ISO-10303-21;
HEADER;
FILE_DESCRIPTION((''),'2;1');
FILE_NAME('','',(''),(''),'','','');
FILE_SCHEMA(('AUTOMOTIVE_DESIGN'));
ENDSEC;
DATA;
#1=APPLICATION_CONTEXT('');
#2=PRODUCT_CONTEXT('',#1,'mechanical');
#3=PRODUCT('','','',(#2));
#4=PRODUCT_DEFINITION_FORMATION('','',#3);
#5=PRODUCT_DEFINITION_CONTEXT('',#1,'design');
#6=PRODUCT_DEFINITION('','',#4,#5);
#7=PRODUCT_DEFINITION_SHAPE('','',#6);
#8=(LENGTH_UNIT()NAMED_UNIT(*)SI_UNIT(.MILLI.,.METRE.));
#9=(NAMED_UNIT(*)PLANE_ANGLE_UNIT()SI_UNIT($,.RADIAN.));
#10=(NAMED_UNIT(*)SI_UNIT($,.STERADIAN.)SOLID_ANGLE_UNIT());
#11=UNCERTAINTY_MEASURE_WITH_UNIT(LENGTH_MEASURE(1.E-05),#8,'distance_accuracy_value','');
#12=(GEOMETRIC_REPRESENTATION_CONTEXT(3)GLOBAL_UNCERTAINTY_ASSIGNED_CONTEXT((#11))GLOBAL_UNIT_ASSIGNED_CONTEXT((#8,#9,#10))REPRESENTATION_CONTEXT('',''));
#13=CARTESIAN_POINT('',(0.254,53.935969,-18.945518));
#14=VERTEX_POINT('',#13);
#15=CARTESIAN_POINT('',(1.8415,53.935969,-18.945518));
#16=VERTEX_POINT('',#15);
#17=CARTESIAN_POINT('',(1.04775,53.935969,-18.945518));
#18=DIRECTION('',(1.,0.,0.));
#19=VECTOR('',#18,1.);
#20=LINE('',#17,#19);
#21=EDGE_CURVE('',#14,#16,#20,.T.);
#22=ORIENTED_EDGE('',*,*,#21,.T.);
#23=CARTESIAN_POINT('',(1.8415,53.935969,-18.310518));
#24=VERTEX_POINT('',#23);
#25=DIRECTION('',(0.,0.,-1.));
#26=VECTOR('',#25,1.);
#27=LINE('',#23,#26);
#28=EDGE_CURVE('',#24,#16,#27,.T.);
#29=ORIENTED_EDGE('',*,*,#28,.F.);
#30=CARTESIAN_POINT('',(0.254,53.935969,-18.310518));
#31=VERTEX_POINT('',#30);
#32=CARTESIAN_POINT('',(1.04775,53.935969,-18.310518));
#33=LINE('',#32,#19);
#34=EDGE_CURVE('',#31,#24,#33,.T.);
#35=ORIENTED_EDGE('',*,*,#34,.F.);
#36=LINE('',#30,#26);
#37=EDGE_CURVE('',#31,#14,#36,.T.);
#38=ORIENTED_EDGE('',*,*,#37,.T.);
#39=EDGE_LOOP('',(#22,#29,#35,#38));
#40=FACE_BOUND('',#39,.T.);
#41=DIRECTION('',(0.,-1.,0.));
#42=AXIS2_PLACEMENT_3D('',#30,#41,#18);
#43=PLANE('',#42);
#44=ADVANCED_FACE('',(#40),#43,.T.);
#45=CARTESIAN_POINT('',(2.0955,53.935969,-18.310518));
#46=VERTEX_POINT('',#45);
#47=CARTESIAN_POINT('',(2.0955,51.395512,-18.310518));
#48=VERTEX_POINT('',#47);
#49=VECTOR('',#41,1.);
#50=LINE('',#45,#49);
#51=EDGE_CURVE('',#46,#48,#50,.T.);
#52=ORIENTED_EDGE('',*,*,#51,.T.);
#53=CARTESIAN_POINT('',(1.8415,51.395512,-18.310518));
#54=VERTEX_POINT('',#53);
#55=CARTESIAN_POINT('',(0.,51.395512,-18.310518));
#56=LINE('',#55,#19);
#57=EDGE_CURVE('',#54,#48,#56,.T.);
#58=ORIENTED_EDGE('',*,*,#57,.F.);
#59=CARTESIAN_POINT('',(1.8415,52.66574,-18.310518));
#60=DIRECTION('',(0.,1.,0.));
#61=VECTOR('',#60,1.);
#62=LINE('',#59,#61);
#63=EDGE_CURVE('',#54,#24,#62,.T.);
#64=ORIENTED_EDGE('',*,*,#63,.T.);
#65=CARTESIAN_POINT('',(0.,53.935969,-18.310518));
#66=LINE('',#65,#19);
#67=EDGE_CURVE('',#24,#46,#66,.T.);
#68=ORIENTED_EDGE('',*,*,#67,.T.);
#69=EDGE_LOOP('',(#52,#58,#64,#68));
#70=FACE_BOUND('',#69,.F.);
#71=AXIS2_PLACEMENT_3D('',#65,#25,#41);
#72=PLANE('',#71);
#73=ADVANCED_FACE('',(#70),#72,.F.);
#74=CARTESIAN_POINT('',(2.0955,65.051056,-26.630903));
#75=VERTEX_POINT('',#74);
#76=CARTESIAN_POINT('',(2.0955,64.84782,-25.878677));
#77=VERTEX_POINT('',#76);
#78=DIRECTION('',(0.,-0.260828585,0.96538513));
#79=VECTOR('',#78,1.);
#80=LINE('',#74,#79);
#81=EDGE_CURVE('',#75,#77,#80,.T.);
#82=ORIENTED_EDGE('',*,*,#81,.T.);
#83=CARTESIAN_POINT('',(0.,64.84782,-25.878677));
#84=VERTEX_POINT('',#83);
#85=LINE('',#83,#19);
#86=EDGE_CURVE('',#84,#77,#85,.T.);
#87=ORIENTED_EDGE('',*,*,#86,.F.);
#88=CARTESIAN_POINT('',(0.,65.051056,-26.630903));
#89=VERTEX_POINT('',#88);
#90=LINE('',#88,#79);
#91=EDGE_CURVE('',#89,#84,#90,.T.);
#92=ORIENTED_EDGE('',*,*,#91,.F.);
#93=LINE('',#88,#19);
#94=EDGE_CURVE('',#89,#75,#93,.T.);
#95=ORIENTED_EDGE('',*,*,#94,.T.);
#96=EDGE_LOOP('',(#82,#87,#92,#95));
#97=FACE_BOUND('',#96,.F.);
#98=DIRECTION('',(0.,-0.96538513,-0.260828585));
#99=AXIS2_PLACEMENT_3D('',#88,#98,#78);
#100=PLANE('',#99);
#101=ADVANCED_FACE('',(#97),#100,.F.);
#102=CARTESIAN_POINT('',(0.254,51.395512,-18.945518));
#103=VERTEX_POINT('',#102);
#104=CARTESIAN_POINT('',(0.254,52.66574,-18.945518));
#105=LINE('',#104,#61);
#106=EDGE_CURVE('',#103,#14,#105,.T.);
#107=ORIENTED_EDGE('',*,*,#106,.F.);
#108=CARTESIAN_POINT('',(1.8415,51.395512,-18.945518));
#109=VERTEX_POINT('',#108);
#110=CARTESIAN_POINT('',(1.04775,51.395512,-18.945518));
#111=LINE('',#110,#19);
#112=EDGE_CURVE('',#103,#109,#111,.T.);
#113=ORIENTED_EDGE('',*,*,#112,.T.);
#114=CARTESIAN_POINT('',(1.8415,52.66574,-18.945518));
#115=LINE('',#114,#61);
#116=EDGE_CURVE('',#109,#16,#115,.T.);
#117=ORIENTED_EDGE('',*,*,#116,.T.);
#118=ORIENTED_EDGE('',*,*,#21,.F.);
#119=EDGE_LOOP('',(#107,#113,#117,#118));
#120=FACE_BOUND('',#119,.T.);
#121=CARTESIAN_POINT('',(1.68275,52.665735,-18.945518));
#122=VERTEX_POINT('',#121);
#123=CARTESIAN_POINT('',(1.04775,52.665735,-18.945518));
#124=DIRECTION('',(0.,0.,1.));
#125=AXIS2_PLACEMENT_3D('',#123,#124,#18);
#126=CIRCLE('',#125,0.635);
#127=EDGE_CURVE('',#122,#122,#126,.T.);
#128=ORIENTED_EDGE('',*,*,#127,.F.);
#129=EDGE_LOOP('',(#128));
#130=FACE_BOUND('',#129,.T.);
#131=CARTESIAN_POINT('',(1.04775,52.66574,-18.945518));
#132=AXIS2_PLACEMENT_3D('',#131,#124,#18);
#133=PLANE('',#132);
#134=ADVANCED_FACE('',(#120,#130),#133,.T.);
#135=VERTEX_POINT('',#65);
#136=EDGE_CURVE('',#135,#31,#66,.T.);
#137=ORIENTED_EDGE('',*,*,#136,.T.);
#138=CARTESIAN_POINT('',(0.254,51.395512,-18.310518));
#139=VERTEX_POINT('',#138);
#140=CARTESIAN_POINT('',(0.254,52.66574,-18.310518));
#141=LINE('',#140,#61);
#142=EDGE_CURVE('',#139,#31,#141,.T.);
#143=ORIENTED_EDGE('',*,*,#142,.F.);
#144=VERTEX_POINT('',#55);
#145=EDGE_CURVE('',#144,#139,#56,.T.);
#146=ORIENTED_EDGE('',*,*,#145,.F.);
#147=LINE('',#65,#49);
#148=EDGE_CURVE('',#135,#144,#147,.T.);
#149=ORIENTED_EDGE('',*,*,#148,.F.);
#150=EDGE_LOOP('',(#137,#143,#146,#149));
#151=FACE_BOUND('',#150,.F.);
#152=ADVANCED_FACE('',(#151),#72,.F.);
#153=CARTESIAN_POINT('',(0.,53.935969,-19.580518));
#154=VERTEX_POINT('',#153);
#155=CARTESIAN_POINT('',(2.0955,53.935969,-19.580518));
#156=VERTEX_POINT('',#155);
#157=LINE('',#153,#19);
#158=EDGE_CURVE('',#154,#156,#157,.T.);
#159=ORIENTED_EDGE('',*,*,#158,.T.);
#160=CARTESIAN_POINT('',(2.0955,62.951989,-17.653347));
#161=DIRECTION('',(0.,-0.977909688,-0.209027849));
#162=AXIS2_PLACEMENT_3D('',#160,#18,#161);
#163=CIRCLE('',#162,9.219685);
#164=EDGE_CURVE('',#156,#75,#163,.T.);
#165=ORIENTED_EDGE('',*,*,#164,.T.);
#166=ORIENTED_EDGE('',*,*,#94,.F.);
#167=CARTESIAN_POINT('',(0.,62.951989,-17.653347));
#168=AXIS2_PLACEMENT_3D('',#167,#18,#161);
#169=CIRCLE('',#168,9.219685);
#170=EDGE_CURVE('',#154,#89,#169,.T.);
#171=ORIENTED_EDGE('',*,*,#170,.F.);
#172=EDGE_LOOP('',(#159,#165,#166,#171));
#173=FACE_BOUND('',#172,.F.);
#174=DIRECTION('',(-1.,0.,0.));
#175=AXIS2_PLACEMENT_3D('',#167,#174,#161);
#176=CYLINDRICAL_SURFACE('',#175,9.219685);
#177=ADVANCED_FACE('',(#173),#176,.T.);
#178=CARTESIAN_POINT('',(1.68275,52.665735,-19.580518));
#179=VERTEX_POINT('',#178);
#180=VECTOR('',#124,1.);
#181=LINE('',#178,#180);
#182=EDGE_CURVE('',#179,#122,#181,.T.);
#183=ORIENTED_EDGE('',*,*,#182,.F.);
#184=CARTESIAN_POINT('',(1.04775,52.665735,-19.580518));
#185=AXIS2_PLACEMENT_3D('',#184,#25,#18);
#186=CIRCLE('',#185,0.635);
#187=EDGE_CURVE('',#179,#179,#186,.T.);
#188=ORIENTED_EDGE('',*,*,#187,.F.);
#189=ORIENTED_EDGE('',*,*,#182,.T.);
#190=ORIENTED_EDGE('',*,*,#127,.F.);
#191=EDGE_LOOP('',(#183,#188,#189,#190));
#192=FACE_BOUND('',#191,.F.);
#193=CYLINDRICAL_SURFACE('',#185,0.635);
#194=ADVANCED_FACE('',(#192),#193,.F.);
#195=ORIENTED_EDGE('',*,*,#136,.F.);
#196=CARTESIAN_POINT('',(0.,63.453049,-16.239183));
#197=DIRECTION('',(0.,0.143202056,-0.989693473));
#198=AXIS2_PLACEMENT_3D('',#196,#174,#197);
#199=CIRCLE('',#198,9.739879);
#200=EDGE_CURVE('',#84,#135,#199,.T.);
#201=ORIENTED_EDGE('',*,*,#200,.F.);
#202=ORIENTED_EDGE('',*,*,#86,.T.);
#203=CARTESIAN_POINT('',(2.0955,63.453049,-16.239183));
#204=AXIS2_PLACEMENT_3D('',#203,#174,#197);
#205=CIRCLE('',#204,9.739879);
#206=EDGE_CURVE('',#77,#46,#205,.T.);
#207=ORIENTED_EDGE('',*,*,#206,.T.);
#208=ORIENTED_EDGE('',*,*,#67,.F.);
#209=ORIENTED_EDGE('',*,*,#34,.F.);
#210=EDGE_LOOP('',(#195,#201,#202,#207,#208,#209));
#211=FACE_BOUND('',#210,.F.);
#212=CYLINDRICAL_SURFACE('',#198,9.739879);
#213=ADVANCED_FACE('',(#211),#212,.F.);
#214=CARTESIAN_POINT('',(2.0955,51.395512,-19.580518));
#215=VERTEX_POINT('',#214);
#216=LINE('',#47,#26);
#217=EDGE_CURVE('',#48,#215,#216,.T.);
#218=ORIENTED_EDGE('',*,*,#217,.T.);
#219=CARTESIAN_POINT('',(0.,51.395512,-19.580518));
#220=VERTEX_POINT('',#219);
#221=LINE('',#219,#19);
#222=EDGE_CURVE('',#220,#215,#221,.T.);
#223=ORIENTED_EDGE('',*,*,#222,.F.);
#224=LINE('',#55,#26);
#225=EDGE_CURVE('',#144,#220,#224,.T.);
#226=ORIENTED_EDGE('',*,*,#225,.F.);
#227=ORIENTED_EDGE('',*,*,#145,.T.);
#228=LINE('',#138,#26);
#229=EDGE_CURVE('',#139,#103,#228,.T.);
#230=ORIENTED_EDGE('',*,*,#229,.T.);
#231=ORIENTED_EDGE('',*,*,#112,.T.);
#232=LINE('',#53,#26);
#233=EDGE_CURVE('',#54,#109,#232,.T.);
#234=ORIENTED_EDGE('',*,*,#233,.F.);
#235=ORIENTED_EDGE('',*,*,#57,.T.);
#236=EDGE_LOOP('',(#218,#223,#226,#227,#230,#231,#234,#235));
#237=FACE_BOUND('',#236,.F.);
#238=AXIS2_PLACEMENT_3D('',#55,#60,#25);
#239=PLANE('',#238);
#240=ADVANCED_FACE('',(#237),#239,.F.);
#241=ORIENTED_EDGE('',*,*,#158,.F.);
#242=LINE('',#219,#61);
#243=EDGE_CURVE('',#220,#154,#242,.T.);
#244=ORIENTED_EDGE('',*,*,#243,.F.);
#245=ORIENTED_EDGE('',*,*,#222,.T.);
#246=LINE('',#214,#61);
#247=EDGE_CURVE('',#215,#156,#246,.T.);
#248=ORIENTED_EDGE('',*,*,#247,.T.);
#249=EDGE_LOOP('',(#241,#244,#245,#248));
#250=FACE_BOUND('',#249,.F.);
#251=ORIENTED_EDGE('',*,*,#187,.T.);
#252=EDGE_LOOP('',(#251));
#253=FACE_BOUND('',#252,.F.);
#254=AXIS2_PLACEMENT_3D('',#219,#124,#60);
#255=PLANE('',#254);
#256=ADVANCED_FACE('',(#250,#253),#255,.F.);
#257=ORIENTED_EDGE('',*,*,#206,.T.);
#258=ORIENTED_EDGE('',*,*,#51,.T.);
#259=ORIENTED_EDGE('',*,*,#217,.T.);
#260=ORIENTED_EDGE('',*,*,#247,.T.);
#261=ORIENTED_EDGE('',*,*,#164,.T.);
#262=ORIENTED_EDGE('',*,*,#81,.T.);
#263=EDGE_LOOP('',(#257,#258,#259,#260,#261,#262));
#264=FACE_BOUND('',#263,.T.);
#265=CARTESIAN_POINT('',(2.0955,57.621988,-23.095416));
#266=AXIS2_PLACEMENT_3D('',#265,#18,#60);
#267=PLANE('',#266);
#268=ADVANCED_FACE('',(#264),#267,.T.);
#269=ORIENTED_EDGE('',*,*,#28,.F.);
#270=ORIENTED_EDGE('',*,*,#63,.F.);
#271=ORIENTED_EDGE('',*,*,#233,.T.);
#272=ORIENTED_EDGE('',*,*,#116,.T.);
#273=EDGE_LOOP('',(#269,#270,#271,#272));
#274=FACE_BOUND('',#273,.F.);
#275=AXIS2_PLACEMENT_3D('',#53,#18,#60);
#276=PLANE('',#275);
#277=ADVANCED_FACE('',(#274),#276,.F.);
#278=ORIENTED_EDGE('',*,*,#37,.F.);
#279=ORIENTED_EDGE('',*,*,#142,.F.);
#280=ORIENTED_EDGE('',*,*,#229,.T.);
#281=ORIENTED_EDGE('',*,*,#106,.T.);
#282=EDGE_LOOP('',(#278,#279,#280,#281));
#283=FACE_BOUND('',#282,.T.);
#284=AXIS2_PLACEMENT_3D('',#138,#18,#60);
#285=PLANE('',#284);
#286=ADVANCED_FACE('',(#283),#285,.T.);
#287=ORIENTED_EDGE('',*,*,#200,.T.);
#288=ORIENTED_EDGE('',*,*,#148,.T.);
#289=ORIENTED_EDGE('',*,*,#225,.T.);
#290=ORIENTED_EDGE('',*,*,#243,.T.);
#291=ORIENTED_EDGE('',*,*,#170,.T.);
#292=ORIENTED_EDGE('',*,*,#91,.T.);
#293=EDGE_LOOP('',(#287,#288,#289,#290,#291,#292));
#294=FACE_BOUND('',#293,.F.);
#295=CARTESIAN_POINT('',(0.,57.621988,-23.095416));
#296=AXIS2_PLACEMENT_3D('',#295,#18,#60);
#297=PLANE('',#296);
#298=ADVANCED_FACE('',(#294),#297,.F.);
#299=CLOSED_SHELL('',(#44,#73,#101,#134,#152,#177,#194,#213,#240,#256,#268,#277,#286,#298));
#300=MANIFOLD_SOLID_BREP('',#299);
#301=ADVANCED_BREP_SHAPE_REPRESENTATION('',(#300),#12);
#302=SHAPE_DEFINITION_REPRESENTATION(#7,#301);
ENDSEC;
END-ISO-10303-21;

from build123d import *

# Parameters (mm, degrees)
F1_DEPTH = 2.0955
F2_R     = 0.635
F3_DEPTH = 25.4
F4_W     = 1.5875
F4_H     = 2.5404572
F4_R     = 0.635
F5_DEPTH = 0.635


# Not quite as in the source:
# - a feature names something its author has since deleted; it is built from what else it names


with BuildPart() as f1:
    # F0 (on Right) → F1 (new body)
    with BuildSketch(Plane.YZ):
        with BuildLine():
            Line((51.3955118105, -18.3105177657), (51.3955118105, -19.5805177657))
            Line((51.3955118105, -19.5805177657), (53.9359690105, -19.5805177657))
            ThreePointArc((53.9359690105, -19.5805177657), (58.0135640106, -25.4388820379), (65.0510564446, -26.6309026629))
            Line((65.0510564446, -26.6309026629), (64.8478195071, -25.8786771446))
            ThreePointArc((64.8478195071, -25.8786771446), (57.9021718289, -24.2424946681), (53.9359690105, -18.3105177657))
            Line((53.9359690105, -18.3105177657), (51.3955118105, -18.3105177657))
        make_face()
    extrude(amount=F1_DEPTH)

    # F2 (on face) → F3 (cut)
    with BuildSketch(Plane(origin=(0, 0, -19.5805177657), x_dir=(1, 0, 0), z_dir=(0, 0, -1))):
        with Locations((1.04775, -52.6657345776)):
            Circle(F2_R)
    extrude(amount=-F3_DEPTH, mode=Mode.SUBTRACT)

    # F4 (on face) → F5 (cut)
    with BuildSketch(Plane.XY.offset(-18.3105177657)):
        with Locations((1.04775, 52.6657404105)):
            Rectangle(F4_W, F4_H)
        with Locations((1.04775, 52.6657345776)):
            Circle(F4_R, mode=Mode.SUBTRACT)
    extrude(amount=-F5_DEPTH, mode=Mode.SUBTRACT)


solid = f1.part
